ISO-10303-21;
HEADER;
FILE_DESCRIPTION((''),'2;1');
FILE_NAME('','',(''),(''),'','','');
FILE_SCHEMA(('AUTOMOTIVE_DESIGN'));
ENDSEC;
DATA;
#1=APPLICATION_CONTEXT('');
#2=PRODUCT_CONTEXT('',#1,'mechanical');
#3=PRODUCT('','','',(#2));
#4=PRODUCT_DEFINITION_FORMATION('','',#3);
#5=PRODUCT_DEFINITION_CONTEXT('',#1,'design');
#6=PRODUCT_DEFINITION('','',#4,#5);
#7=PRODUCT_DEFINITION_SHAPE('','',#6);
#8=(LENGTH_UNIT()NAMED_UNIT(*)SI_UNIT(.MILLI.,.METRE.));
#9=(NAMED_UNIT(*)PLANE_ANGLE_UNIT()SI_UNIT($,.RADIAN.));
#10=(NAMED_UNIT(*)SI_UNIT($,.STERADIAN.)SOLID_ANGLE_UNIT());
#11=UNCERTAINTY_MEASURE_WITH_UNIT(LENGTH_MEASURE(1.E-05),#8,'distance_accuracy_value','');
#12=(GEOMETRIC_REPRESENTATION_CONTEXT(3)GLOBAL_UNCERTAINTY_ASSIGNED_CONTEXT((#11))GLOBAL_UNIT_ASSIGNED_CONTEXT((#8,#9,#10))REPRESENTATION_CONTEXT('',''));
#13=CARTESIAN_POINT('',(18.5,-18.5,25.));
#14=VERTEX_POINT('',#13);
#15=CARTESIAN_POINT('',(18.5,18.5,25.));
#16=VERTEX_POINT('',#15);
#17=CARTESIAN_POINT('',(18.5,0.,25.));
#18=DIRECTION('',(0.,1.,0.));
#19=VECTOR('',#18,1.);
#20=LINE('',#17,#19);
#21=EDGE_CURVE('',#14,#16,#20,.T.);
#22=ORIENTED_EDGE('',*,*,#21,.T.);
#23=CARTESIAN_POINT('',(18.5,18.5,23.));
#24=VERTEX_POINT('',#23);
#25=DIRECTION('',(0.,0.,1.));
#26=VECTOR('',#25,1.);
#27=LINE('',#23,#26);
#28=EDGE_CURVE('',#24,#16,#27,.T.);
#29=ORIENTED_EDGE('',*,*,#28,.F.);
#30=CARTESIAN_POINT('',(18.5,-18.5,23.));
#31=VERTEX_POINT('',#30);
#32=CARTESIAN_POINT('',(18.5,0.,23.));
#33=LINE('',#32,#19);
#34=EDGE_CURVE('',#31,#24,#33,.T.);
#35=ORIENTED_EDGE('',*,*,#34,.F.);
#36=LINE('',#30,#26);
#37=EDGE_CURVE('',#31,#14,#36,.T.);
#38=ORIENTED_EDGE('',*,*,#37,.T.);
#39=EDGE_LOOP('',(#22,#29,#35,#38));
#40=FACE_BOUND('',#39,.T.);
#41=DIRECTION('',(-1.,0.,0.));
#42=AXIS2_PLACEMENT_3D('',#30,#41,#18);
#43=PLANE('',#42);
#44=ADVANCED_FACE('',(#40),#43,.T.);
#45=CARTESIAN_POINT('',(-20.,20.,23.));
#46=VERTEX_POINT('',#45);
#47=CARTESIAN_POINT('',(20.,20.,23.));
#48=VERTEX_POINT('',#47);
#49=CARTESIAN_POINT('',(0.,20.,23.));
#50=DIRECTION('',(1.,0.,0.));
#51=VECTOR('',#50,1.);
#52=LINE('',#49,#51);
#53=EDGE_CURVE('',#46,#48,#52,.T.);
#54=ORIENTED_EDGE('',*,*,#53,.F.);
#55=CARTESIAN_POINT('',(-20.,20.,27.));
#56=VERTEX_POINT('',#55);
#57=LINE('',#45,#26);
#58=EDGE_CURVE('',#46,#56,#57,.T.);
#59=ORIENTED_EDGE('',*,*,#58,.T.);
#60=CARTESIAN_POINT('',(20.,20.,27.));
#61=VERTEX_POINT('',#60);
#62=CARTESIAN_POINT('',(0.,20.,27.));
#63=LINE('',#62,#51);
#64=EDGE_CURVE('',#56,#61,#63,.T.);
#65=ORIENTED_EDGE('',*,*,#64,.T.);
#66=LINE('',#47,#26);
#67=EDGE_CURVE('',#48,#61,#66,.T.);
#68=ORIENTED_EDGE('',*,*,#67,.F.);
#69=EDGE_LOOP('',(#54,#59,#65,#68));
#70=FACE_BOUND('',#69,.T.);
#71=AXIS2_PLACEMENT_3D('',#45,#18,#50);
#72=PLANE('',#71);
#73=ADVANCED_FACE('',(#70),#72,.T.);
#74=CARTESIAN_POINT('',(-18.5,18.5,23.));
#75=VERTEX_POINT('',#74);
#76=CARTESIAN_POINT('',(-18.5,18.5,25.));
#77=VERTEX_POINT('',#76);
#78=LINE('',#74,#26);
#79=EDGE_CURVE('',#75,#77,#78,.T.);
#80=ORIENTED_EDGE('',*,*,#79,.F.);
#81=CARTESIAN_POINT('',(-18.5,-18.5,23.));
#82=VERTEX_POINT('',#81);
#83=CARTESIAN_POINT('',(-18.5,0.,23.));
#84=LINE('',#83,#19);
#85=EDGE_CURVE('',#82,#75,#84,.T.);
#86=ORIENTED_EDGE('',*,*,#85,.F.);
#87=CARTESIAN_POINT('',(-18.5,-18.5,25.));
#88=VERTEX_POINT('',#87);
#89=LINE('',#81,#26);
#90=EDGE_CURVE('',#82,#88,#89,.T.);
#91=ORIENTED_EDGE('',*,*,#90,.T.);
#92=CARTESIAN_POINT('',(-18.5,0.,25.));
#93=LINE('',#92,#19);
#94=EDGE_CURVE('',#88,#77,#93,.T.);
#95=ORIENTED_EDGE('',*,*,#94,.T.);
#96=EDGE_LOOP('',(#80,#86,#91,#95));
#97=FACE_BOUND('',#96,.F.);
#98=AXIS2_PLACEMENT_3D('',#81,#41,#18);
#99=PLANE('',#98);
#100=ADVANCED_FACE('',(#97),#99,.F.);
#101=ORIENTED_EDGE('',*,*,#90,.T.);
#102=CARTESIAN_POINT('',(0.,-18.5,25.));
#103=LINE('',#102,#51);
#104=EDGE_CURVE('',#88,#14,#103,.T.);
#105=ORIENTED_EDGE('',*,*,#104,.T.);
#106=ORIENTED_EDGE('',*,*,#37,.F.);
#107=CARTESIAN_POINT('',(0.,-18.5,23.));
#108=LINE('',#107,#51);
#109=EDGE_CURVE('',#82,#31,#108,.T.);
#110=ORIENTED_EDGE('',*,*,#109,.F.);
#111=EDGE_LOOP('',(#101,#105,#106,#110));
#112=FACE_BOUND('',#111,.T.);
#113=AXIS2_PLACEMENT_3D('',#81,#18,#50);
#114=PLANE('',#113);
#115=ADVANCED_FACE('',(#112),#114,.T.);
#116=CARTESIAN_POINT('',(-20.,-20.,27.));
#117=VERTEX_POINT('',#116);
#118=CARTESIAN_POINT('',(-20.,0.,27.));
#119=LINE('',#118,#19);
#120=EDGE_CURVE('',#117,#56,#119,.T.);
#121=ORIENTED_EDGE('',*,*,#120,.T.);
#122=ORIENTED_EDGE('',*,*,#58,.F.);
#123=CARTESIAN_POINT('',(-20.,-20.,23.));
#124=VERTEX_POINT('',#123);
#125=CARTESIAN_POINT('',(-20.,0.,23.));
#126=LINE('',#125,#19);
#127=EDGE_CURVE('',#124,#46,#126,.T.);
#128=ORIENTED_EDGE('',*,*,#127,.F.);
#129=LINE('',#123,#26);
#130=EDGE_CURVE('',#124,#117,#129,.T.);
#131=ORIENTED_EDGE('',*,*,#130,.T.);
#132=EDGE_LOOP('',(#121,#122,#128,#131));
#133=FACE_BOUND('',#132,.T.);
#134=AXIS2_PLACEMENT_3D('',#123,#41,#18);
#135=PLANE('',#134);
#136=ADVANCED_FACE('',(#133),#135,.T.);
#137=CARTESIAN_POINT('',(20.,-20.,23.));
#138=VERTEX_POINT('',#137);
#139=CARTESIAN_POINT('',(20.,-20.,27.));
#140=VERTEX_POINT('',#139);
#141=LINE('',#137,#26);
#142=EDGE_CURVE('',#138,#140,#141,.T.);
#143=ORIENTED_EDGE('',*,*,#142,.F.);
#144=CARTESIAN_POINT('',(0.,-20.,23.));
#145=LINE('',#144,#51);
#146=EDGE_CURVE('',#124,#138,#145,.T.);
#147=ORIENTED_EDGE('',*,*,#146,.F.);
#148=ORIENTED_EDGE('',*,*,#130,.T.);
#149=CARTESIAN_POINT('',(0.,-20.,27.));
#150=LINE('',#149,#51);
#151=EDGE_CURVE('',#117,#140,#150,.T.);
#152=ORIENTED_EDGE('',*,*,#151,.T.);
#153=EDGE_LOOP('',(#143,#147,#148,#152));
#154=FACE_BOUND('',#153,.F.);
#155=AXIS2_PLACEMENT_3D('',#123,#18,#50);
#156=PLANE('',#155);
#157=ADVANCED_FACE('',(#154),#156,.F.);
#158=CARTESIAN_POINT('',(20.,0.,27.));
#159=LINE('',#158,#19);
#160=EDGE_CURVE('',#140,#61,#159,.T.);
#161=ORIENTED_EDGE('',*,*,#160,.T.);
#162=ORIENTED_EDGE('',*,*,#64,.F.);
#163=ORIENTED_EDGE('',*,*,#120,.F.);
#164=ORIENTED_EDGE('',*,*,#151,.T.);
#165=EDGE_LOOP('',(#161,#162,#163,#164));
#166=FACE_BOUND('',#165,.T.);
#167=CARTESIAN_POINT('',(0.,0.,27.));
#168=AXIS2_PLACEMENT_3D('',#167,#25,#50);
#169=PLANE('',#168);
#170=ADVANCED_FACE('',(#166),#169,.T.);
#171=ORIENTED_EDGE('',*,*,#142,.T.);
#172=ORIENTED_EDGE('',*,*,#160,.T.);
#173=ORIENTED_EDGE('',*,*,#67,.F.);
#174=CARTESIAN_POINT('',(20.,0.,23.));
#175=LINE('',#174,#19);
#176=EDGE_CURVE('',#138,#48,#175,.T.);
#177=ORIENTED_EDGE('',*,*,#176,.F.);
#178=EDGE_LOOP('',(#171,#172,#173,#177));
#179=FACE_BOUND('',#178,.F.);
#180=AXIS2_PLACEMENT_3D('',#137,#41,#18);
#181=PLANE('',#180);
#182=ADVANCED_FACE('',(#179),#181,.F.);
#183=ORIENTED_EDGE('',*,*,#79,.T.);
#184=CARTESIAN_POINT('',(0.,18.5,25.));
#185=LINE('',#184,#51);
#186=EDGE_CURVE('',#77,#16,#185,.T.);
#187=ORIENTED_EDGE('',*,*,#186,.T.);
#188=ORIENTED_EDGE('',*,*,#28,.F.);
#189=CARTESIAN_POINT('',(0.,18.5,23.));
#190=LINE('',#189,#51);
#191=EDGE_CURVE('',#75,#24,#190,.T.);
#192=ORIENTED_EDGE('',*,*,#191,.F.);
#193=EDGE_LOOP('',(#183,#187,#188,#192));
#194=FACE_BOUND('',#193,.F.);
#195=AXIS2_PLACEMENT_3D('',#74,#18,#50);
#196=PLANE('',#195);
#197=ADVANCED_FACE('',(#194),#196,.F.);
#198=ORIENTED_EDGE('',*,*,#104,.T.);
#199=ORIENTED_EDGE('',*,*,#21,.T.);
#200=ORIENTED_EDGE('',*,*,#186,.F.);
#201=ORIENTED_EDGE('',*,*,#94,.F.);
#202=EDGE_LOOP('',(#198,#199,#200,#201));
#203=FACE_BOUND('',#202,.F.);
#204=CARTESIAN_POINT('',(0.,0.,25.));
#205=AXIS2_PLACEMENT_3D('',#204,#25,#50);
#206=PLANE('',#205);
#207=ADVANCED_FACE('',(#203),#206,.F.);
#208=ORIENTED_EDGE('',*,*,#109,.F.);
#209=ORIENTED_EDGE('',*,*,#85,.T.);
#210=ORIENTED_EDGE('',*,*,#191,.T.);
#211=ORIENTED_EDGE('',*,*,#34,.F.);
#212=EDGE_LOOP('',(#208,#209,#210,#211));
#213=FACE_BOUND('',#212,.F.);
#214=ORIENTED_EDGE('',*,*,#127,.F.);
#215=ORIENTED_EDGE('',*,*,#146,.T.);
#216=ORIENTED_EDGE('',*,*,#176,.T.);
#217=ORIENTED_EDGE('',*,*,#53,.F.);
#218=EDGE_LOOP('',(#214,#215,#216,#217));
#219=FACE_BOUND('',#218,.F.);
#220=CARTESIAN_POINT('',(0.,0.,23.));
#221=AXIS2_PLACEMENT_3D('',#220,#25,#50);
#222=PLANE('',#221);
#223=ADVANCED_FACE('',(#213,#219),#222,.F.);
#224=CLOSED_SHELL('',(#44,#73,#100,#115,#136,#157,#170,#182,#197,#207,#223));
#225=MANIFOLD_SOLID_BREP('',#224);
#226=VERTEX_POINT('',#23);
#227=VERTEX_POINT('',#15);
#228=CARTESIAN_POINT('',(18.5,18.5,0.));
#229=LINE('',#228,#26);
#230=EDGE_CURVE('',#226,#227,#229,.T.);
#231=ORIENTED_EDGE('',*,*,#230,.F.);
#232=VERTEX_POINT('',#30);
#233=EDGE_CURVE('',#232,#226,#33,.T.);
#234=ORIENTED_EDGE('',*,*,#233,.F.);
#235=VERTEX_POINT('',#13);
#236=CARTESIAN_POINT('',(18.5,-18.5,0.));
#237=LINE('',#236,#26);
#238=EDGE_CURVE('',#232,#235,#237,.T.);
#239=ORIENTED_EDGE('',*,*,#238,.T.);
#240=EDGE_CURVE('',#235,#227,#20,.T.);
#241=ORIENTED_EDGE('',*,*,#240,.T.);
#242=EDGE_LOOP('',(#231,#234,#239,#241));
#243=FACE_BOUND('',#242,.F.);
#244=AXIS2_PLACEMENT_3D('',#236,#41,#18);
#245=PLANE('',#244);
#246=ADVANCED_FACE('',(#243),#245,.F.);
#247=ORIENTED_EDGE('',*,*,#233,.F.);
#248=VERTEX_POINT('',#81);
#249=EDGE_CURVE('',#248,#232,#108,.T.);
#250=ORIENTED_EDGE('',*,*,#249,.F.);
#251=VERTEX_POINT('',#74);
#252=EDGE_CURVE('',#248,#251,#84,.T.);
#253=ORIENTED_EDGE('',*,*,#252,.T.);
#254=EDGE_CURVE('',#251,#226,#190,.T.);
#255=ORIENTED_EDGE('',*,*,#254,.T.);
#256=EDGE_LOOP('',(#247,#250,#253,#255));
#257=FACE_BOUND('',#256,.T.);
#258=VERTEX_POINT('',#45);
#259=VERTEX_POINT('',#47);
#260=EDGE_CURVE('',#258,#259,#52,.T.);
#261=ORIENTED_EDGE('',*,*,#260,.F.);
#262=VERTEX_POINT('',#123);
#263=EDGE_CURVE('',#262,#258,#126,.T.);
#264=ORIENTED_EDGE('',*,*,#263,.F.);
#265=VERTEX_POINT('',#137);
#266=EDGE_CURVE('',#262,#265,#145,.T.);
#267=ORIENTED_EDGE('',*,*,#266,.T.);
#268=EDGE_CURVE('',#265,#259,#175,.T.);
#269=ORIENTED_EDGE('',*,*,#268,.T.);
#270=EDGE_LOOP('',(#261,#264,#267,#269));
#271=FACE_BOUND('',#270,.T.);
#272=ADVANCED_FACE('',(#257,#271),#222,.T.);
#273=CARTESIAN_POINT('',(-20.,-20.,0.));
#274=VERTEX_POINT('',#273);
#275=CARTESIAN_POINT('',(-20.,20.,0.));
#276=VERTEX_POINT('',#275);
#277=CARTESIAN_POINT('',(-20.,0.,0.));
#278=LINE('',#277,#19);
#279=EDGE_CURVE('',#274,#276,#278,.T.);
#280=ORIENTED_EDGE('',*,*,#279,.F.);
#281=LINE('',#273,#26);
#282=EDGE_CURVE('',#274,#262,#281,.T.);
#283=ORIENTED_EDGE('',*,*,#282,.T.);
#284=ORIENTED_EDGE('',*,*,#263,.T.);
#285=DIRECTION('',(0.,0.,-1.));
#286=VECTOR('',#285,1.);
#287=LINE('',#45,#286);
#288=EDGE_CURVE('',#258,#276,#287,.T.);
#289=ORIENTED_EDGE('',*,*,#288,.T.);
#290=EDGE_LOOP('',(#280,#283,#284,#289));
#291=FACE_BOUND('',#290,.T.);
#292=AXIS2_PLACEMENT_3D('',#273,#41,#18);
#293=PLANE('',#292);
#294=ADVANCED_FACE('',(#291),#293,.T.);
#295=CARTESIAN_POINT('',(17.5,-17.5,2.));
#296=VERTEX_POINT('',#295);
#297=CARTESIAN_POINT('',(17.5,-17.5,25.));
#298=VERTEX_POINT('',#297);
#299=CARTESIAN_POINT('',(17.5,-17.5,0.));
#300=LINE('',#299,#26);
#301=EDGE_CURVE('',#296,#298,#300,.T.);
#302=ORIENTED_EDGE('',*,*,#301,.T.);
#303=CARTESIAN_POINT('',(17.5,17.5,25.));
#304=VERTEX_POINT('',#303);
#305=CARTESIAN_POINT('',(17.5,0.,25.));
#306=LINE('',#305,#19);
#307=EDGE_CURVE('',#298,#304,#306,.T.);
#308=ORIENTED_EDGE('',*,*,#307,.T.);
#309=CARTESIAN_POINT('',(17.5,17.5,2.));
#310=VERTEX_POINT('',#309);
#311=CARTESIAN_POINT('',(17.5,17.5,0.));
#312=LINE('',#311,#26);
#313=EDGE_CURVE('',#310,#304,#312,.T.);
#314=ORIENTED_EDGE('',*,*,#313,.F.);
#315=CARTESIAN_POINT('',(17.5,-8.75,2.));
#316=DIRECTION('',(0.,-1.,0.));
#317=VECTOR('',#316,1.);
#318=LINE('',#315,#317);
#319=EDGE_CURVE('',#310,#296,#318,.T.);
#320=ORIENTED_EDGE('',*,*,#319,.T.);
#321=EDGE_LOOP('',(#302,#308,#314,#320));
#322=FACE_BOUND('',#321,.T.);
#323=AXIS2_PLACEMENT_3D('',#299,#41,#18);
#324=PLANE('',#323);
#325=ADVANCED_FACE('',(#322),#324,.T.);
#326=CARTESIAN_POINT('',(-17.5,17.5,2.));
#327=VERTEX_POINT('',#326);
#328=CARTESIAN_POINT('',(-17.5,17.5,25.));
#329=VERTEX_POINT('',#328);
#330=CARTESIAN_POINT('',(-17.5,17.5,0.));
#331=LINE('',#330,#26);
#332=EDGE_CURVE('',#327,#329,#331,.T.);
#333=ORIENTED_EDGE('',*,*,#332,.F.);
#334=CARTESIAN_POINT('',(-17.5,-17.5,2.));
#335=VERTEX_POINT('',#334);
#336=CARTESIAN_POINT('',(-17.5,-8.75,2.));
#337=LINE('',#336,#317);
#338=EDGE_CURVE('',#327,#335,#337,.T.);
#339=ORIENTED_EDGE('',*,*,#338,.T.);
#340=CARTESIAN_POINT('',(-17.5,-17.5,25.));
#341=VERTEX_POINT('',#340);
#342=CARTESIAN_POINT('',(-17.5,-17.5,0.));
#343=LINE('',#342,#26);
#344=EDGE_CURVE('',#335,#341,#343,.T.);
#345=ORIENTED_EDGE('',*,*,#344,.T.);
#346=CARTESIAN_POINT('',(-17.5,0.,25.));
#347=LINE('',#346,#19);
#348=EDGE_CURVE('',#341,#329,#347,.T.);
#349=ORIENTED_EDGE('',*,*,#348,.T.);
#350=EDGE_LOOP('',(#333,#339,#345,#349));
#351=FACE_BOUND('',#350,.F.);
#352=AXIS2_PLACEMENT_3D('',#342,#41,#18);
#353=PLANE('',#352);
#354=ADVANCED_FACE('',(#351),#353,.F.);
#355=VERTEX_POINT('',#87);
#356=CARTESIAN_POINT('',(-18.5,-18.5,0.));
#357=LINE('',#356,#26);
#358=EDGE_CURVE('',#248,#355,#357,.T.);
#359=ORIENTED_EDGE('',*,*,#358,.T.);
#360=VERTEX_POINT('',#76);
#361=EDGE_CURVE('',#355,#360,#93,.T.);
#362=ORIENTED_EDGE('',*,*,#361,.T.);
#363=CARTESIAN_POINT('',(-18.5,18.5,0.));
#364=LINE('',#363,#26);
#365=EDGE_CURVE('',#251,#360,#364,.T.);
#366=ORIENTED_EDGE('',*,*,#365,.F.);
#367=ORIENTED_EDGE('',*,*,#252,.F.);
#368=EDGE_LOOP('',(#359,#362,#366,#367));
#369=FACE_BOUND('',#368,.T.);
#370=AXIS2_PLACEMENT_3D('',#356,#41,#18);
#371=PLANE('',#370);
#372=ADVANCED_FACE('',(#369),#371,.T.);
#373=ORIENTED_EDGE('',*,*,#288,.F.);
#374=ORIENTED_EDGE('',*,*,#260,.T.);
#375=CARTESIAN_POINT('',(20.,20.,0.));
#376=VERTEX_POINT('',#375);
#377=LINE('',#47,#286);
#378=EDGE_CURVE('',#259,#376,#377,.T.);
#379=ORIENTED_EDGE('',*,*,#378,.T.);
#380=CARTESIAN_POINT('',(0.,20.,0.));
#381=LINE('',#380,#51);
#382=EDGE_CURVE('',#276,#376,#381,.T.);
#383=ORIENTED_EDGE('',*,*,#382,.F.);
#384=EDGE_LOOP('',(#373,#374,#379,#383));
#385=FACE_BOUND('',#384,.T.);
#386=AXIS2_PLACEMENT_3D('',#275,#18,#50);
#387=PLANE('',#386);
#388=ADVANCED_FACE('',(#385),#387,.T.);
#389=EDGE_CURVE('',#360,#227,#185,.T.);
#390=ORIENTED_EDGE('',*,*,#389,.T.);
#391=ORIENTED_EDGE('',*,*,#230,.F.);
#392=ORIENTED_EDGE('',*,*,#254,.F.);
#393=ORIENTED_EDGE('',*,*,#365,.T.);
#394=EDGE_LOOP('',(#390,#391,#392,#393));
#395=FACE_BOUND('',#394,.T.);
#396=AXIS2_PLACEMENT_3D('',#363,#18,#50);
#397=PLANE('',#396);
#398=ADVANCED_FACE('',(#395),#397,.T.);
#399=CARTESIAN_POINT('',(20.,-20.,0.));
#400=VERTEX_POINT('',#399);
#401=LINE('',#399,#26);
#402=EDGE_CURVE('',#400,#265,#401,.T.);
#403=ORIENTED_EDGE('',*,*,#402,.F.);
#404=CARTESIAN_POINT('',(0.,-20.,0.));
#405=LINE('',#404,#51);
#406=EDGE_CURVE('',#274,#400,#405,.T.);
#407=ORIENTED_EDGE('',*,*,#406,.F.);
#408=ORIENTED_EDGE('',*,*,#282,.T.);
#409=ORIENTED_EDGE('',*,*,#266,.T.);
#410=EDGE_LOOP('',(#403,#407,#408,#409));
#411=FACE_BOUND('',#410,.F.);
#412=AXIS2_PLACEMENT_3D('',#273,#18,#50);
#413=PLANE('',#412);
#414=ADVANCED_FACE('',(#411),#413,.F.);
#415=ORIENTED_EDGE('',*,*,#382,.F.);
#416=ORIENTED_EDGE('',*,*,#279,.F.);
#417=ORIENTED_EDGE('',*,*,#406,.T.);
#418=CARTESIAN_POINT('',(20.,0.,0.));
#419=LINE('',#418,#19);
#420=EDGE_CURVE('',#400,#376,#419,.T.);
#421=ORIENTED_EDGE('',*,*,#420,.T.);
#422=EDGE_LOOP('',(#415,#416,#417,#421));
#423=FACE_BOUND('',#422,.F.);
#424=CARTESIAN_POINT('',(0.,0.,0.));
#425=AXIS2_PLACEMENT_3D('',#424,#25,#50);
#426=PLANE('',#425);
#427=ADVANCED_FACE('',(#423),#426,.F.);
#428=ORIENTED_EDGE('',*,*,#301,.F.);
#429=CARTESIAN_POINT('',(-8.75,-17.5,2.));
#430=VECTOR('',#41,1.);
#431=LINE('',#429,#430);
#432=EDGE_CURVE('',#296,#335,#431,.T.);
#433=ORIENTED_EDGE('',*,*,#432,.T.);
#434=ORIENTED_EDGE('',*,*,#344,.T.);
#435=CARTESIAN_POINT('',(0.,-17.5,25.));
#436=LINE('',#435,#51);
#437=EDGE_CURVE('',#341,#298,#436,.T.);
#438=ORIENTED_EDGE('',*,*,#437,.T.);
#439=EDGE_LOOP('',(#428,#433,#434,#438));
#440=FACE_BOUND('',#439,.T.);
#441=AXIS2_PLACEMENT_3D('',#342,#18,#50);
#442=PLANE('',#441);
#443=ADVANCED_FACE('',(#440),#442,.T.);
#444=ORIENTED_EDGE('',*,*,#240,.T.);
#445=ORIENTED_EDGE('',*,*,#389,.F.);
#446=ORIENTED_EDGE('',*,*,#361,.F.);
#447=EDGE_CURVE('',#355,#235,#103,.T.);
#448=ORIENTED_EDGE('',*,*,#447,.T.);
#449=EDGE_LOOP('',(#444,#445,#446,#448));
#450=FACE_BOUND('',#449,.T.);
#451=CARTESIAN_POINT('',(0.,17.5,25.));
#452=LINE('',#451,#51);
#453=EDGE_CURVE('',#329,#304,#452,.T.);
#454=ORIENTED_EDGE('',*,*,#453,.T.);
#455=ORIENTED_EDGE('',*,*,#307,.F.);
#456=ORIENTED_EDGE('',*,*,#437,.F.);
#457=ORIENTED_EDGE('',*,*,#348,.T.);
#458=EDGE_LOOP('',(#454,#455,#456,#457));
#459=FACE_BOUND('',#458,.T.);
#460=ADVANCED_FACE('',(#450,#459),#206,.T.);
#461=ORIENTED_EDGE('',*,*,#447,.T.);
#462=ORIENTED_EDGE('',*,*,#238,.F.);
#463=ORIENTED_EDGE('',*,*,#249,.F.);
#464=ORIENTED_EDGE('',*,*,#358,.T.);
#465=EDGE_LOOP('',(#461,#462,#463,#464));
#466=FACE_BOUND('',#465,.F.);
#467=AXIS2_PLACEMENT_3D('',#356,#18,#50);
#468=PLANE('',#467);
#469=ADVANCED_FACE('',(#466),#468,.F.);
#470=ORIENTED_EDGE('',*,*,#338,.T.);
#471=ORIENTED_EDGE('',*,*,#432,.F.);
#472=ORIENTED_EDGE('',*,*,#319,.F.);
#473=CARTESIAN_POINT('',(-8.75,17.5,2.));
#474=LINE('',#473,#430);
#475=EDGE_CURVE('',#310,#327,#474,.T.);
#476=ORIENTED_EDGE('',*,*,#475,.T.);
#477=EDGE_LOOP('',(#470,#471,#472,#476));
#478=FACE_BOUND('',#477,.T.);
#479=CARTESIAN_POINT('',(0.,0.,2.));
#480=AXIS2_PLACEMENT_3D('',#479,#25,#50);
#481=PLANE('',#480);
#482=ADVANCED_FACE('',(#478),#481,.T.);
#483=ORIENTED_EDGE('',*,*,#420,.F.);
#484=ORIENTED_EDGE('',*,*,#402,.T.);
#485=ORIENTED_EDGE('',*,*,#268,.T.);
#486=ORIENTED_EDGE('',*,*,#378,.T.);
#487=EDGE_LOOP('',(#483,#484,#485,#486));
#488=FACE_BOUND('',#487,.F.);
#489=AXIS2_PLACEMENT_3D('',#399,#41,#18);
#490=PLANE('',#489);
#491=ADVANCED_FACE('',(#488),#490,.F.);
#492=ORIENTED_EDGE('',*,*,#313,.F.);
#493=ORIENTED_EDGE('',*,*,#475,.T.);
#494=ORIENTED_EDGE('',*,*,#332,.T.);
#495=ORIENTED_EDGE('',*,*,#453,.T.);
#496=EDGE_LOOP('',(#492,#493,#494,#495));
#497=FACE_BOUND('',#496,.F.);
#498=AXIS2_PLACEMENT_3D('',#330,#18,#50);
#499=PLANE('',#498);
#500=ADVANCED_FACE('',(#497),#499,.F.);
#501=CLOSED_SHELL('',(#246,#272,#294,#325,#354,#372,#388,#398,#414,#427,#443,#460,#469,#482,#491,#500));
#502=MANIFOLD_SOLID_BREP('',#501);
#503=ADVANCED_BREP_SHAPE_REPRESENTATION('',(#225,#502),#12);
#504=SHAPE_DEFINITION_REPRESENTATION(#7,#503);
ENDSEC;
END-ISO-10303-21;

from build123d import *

# Parameters (mm, degrees)
F0_W     = 40
F0_H     = 40
F0_W_2   = 37
F0_H_2   = 37
F0_W_3   = 35
F0_H_3   = 35
F0_W_4   = 34
F0_H_4   = 34
F1_DEPTH = 2
F2_DEPTH = 25
F3_DEPTH = 23
F4_START = 23
F4_DEPTH = 4
F5_START = 25
F5_DEPTH = 2


with BuildPart() as f1:
    # F0 (on Top) → F1 (new body)
    with BuildSketch(Plane.XY):
        Rectangle(F0_W, F0_H)
        Rectangle(F0_W_2, F0_H_2, mode=Mode.SUBTRACT)
        Rectangle(F0_W_2, F0_H_2)
        Rectangle(F0_W_3, F0_H_3, mode=Mode.SUBTRACT)
        Rectangle(F0_W_3, F0_H_3)
        Rectangle(F0_W_4, F0_H_4, mode=Mode.SUBTRACT)
        Rectangle(F0_W_4, F0_H_4)
    extrude(amount=F1_DEPTH)

    # F0 (on Top) → F2 (join)
    with BuildSketch(Plane.XY):
        Rectangle(F0_W_2, F0_H_2)
        Rectangle(F0_W_3, F0_H_3, mode=Mode.SUBTRACT)
    extrude(amount=F2_DEPTH)

    # F0 (on Top) → F3 (join)
    with BuildSketch(Plane.XY):
        Rectangle(F0_W, F0_H)
        Rectangle(F0_W_2, F0_H_2, mode=Mode.SUBTRACT)
    extrude(amount=F3_DEPTH)


with BuildPart() as f4:
    # F0 (on Top) → F4 (new body)
    with BuildSketch(Plane.XY.offset(F4_START)):
        Rectangle(F0_W, F0_H)
        Rectangle(F0_W_2, F0_H_2, mode=Mode.SUBTRACT)
    extrude(amount=F4_DEPTH)

    # F0 (on Top) → F5 (join)
    with BuildSketch(Plane.XY.offset(F5_START)):
        Rectangle(F0_W_2, F0_H_2)
        Rectangle(F0_W_3, F0_H_3, mode=Mode.SUBTRACT)
        Rectangle(F0_W_3, F0_H_3)
        Rectangle(F0_W_4, F0_H_4, mode=Mode.SUBTRACT)
        Rectangle(F0_W_4, F0_H_4)
    extrude(amount=F5_DEPTH)


solid = Compound([f1.part, f4.part])
